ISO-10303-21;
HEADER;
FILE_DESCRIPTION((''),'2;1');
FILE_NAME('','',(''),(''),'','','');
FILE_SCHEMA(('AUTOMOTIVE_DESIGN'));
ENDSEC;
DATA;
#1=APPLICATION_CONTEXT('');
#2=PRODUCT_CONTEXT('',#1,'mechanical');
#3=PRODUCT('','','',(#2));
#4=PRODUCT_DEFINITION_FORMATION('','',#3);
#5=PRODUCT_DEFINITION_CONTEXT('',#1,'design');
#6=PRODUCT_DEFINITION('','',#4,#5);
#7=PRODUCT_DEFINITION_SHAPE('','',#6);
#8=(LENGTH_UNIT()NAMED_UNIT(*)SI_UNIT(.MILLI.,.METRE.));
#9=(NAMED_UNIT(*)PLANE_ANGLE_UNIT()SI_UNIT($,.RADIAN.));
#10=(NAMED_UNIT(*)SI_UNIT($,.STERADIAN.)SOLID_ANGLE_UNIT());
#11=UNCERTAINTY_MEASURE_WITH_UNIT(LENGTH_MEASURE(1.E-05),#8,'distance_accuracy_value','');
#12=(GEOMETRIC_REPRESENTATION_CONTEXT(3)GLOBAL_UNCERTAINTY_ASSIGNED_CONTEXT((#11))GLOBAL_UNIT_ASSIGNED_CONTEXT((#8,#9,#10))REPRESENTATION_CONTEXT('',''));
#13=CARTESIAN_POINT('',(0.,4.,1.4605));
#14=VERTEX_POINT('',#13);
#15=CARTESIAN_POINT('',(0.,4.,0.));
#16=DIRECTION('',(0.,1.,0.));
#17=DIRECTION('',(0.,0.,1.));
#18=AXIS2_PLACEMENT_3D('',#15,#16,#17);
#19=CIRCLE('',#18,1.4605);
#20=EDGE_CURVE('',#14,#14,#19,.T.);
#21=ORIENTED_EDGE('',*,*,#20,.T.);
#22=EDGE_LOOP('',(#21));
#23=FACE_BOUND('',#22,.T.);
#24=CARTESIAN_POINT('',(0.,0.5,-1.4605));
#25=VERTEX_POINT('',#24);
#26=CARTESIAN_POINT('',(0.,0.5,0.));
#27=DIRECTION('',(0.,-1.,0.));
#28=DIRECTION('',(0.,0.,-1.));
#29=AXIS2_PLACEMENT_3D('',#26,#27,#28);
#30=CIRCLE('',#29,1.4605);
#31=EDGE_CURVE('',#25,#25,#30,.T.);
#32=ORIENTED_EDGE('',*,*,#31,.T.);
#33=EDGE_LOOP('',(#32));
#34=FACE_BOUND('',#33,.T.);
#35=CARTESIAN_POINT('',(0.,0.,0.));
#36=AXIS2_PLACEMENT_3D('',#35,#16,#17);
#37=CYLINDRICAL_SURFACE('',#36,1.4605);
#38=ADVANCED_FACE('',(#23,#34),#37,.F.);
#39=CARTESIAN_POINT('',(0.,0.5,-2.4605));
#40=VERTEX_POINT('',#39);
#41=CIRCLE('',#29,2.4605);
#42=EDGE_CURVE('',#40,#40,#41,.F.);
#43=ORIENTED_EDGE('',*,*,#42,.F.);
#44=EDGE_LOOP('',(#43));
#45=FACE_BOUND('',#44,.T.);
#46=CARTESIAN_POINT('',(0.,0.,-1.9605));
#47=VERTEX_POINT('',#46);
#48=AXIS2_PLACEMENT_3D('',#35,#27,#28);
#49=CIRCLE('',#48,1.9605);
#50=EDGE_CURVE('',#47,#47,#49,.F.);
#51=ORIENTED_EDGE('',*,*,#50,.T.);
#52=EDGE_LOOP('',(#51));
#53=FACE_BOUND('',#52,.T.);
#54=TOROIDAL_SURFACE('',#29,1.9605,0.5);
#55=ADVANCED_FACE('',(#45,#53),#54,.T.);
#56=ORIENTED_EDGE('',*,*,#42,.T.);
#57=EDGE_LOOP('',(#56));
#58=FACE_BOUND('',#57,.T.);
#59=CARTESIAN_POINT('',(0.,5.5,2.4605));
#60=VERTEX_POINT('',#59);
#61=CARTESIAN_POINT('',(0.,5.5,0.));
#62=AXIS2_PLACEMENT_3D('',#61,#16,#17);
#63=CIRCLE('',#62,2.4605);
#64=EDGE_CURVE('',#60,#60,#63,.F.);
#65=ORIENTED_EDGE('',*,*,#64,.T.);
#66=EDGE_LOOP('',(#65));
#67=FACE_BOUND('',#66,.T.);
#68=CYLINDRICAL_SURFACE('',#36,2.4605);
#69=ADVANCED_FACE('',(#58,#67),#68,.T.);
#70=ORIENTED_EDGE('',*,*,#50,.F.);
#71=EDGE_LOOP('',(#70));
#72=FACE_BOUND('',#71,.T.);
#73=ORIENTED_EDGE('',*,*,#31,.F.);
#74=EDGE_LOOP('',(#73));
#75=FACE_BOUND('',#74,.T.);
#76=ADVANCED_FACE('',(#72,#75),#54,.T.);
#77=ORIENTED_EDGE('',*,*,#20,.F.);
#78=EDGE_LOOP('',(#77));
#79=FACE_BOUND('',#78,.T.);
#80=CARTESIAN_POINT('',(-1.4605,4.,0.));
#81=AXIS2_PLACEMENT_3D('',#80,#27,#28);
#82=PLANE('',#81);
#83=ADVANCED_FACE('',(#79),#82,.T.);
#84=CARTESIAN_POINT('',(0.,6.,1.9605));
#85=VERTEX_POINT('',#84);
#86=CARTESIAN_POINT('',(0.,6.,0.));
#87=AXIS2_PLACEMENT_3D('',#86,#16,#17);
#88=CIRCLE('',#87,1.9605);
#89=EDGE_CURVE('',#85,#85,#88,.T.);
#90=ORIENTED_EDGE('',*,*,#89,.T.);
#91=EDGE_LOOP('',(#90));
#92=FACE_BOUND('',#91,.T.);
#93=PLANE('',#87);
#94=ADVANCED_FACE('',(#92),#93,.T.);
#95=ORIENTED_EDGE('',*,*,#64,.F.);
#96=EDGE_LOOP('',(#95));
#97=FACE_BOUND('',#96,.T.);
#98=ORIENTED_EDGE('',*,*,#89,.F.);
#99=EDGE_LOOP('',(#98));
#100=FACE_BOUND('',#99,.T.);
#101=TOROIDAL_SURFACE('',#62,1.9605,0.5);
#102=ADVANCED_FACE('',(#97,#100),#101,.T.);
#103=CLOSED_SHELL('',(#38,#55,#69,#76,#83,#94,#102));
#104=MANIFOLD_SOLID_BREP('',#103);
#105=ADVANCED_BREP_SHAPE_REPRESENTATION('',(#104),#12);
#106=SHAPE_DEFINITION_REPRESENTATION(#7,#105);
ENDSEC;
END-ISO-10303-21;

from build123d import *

# Parameters (mm, degrees)
FILLET1_R = 0.5


with BuildPart() as part:
    # Sketch1 → Revolve1 (revolve)
    with BuildSketch(Plane.XY, mode=Mode.PRIVATE) as revolve1_sk:
        Polygon((-1.4605, 0), (-1.4605, 4), (0, 4), (0, 6), (-2.4605, 6), (-2.4605, 0), align=None)
    revolve(revolve1_sk.sketch.rotate(Axis((0, 0, 0), (0, -1, 0)), 270), axis=Axis((0, 0, 0), (0, -1, 0)))

    # Fillet1
    fillet1_edges = [part.edges().sort_by_distance(p)[0] for p in [
        (0, 0, -2.4605),
        (0, 6, -2.4605),
        (0, 0, -1.4605),
    ]]
    fillet(fillet1_edges, radius=FILLET1_R - 0.0001)  # a hair under: the kernel refuses the full size


solid = part.part
